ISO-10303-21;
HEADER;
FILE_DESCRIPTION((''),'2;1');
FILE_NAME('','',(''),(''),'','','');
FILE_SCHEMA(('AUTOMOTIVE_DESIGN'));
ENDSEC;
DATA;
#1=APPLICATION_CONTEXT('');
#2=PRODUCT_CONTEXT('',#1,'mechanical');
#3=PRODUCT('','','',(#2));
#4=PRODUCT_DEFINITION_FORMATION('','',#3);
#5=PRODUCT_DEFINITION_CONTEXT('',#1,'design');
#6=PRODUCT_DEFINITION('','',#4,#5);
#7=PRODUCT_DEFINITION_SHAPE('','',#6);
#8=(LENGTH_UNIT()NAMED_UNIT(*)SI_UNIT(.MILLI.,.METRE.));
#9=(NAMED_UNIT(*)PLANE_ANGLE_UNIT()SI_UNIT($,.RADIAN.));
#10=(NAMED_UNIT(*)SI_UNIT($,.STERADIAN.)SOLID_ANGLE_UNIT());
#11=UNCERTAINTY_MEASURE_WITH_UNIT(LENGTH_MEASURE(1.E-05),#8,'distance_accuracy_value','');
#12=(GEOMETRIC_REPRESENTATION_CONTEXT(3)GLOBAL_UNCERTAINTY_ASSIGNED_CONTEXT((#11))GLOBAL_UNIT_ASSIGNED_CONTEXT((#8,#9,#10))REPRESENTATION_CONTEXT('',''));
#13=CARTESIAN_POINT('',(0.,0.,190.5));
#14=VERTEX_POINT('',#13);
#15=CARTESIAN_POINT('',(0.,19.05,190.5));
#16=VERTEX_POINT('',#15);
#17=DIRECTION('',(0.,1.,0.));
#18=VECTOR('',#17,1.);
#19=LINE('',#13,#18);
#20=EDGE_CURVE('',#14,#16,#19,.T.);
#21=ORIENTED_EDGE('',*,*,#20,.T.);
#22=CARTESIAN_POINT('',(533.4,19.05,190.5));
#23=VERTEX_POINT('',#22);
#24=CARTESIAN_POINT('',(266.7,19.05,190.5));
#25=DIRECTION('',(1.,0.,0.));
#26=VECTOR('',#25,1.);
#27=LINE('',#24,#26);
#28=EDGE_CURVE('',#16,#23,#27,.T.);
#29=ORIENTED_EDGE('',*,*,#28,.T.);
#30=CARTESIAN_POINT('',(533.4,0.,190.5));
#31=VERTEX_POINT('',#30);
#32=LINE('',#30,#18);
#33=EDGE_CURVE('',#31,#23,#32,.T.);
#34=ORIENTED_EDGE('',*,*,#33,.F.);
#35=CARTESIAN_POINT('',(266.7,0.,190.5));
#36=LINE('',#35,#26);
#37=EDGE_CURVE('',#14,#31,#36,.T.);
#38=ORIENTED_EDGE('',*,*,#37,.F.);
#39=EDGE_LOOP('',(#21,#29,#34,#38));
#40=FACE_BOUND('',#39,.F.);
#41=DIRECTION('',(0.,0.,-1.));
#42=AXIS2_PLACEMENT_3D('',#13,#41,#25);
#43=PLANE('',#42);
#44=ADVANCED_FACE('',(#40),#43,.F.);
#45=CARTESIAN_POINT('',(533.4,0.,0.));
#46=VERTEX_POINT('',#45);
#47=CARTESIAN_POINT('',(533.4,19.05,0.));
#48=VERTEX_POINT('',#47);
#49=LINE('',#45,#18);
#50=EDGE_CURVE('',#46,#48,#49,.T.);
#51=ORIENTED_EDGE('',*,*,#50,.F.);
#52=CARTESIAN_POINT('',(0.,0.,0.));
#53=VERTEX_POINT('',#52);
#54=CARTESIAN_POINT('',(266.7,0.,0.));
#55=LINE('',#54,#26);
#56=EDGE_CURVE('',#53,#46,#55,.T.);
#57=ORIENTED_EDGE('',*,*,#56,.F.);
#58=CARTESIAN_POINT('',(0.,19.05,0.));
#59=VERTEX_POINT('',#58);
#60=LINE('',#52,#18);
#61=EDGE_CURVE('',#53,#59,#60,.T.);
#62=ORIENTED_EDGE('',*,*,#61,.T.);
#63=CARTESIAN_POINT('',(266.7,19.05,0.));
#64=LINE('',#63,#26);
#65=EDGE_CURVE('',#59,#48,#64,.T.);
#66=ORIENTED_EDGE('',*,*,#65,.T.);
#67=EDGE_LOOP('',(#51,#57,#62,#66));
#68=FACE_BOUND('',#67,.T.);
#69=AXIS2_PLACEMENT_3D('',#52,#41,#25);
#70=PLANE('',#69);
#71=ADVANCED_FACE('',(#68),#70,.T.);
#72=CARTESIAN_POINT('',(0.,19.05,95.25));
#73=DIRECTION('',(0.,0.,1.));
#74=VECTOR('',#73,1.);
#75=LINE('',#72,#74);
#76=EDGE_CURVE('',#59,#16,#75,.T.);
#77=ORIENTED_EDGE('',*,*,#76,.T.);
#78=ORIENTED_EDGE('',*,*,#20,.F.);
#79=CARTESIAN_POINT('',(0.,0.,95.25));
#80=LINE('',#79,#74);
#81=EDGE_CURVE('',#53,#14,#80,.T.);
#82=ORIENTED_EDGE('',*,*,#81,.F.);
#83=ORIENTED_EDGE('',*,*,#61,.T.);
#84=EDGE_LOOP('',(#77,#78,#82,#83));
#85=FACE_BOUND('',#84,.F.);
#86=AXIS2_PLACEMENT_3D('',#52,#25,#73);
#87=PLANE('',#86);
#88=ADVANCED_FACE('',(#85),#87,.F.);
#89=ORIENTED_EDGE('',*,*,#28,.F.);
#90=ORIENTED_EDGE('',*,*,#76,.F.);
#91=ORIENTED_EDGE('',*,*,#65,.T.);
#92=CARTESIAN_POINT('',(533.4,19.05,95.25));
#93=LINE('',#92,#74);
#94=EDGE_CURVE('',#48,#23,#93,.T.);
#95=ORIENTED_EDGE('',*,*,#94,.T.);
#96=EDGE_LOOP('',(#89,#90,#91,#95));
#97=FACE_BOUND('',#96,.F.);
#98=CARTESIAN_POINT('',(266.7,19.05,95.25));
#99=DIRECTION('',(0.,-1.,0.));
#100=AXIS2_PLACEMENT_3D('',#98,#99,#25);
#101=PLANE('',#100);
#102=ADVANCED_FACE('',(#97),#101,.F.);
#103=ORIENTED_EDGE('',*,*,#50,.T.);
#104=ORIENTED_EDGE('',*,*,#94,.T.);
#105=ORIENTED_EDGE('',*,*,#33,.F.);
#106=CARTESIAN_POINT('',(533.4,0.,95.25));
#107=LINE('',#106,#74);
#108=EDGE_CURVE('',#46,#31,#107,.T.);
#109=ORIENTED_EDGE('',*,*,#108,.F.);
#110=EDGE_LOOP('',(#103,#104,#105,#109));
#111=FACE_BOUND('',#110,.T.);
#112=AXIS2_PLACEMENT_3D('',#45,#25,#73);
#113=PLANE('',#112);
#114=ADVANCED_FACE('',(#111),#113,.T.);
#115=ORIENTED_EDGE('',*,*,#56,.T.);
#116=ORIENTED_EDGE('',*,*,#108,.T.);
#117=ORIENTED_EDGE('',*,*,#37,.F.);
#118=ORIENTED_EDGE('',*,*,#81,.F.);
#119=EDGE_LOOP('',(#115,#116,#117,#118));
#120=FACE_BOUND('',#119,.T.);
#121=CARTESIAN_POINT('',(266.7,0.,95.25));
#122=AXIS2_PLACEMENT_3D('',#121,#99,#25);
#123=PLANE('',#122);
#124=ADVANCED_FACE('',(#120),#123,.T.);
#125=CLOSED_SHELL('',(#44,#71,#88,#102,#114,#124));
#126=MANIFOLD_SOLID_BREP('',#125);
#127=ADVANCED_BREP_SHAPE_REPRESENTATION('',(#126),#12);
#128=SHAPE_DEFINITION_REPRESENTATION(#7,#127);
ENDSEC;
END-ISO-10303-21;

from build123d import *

# Parameters (mm, degrees)
F0_W     = 533.4
F0_H     = 190.5
F1_DEPTH = 19.05


# Not quite as in the source:
# - a feature names something its author has since deleted; it is built from what else it names


with BuildPart() as f1:
    # F0 (on Front) → F1 (new body)
    with BuildSketch(Plane.XZ):
        with Locations((266.7, 95.25)):
            Rectangle(F0_W, F0_H)
    extrude(amount=-F1_DEPTH)


solid = f1.part
